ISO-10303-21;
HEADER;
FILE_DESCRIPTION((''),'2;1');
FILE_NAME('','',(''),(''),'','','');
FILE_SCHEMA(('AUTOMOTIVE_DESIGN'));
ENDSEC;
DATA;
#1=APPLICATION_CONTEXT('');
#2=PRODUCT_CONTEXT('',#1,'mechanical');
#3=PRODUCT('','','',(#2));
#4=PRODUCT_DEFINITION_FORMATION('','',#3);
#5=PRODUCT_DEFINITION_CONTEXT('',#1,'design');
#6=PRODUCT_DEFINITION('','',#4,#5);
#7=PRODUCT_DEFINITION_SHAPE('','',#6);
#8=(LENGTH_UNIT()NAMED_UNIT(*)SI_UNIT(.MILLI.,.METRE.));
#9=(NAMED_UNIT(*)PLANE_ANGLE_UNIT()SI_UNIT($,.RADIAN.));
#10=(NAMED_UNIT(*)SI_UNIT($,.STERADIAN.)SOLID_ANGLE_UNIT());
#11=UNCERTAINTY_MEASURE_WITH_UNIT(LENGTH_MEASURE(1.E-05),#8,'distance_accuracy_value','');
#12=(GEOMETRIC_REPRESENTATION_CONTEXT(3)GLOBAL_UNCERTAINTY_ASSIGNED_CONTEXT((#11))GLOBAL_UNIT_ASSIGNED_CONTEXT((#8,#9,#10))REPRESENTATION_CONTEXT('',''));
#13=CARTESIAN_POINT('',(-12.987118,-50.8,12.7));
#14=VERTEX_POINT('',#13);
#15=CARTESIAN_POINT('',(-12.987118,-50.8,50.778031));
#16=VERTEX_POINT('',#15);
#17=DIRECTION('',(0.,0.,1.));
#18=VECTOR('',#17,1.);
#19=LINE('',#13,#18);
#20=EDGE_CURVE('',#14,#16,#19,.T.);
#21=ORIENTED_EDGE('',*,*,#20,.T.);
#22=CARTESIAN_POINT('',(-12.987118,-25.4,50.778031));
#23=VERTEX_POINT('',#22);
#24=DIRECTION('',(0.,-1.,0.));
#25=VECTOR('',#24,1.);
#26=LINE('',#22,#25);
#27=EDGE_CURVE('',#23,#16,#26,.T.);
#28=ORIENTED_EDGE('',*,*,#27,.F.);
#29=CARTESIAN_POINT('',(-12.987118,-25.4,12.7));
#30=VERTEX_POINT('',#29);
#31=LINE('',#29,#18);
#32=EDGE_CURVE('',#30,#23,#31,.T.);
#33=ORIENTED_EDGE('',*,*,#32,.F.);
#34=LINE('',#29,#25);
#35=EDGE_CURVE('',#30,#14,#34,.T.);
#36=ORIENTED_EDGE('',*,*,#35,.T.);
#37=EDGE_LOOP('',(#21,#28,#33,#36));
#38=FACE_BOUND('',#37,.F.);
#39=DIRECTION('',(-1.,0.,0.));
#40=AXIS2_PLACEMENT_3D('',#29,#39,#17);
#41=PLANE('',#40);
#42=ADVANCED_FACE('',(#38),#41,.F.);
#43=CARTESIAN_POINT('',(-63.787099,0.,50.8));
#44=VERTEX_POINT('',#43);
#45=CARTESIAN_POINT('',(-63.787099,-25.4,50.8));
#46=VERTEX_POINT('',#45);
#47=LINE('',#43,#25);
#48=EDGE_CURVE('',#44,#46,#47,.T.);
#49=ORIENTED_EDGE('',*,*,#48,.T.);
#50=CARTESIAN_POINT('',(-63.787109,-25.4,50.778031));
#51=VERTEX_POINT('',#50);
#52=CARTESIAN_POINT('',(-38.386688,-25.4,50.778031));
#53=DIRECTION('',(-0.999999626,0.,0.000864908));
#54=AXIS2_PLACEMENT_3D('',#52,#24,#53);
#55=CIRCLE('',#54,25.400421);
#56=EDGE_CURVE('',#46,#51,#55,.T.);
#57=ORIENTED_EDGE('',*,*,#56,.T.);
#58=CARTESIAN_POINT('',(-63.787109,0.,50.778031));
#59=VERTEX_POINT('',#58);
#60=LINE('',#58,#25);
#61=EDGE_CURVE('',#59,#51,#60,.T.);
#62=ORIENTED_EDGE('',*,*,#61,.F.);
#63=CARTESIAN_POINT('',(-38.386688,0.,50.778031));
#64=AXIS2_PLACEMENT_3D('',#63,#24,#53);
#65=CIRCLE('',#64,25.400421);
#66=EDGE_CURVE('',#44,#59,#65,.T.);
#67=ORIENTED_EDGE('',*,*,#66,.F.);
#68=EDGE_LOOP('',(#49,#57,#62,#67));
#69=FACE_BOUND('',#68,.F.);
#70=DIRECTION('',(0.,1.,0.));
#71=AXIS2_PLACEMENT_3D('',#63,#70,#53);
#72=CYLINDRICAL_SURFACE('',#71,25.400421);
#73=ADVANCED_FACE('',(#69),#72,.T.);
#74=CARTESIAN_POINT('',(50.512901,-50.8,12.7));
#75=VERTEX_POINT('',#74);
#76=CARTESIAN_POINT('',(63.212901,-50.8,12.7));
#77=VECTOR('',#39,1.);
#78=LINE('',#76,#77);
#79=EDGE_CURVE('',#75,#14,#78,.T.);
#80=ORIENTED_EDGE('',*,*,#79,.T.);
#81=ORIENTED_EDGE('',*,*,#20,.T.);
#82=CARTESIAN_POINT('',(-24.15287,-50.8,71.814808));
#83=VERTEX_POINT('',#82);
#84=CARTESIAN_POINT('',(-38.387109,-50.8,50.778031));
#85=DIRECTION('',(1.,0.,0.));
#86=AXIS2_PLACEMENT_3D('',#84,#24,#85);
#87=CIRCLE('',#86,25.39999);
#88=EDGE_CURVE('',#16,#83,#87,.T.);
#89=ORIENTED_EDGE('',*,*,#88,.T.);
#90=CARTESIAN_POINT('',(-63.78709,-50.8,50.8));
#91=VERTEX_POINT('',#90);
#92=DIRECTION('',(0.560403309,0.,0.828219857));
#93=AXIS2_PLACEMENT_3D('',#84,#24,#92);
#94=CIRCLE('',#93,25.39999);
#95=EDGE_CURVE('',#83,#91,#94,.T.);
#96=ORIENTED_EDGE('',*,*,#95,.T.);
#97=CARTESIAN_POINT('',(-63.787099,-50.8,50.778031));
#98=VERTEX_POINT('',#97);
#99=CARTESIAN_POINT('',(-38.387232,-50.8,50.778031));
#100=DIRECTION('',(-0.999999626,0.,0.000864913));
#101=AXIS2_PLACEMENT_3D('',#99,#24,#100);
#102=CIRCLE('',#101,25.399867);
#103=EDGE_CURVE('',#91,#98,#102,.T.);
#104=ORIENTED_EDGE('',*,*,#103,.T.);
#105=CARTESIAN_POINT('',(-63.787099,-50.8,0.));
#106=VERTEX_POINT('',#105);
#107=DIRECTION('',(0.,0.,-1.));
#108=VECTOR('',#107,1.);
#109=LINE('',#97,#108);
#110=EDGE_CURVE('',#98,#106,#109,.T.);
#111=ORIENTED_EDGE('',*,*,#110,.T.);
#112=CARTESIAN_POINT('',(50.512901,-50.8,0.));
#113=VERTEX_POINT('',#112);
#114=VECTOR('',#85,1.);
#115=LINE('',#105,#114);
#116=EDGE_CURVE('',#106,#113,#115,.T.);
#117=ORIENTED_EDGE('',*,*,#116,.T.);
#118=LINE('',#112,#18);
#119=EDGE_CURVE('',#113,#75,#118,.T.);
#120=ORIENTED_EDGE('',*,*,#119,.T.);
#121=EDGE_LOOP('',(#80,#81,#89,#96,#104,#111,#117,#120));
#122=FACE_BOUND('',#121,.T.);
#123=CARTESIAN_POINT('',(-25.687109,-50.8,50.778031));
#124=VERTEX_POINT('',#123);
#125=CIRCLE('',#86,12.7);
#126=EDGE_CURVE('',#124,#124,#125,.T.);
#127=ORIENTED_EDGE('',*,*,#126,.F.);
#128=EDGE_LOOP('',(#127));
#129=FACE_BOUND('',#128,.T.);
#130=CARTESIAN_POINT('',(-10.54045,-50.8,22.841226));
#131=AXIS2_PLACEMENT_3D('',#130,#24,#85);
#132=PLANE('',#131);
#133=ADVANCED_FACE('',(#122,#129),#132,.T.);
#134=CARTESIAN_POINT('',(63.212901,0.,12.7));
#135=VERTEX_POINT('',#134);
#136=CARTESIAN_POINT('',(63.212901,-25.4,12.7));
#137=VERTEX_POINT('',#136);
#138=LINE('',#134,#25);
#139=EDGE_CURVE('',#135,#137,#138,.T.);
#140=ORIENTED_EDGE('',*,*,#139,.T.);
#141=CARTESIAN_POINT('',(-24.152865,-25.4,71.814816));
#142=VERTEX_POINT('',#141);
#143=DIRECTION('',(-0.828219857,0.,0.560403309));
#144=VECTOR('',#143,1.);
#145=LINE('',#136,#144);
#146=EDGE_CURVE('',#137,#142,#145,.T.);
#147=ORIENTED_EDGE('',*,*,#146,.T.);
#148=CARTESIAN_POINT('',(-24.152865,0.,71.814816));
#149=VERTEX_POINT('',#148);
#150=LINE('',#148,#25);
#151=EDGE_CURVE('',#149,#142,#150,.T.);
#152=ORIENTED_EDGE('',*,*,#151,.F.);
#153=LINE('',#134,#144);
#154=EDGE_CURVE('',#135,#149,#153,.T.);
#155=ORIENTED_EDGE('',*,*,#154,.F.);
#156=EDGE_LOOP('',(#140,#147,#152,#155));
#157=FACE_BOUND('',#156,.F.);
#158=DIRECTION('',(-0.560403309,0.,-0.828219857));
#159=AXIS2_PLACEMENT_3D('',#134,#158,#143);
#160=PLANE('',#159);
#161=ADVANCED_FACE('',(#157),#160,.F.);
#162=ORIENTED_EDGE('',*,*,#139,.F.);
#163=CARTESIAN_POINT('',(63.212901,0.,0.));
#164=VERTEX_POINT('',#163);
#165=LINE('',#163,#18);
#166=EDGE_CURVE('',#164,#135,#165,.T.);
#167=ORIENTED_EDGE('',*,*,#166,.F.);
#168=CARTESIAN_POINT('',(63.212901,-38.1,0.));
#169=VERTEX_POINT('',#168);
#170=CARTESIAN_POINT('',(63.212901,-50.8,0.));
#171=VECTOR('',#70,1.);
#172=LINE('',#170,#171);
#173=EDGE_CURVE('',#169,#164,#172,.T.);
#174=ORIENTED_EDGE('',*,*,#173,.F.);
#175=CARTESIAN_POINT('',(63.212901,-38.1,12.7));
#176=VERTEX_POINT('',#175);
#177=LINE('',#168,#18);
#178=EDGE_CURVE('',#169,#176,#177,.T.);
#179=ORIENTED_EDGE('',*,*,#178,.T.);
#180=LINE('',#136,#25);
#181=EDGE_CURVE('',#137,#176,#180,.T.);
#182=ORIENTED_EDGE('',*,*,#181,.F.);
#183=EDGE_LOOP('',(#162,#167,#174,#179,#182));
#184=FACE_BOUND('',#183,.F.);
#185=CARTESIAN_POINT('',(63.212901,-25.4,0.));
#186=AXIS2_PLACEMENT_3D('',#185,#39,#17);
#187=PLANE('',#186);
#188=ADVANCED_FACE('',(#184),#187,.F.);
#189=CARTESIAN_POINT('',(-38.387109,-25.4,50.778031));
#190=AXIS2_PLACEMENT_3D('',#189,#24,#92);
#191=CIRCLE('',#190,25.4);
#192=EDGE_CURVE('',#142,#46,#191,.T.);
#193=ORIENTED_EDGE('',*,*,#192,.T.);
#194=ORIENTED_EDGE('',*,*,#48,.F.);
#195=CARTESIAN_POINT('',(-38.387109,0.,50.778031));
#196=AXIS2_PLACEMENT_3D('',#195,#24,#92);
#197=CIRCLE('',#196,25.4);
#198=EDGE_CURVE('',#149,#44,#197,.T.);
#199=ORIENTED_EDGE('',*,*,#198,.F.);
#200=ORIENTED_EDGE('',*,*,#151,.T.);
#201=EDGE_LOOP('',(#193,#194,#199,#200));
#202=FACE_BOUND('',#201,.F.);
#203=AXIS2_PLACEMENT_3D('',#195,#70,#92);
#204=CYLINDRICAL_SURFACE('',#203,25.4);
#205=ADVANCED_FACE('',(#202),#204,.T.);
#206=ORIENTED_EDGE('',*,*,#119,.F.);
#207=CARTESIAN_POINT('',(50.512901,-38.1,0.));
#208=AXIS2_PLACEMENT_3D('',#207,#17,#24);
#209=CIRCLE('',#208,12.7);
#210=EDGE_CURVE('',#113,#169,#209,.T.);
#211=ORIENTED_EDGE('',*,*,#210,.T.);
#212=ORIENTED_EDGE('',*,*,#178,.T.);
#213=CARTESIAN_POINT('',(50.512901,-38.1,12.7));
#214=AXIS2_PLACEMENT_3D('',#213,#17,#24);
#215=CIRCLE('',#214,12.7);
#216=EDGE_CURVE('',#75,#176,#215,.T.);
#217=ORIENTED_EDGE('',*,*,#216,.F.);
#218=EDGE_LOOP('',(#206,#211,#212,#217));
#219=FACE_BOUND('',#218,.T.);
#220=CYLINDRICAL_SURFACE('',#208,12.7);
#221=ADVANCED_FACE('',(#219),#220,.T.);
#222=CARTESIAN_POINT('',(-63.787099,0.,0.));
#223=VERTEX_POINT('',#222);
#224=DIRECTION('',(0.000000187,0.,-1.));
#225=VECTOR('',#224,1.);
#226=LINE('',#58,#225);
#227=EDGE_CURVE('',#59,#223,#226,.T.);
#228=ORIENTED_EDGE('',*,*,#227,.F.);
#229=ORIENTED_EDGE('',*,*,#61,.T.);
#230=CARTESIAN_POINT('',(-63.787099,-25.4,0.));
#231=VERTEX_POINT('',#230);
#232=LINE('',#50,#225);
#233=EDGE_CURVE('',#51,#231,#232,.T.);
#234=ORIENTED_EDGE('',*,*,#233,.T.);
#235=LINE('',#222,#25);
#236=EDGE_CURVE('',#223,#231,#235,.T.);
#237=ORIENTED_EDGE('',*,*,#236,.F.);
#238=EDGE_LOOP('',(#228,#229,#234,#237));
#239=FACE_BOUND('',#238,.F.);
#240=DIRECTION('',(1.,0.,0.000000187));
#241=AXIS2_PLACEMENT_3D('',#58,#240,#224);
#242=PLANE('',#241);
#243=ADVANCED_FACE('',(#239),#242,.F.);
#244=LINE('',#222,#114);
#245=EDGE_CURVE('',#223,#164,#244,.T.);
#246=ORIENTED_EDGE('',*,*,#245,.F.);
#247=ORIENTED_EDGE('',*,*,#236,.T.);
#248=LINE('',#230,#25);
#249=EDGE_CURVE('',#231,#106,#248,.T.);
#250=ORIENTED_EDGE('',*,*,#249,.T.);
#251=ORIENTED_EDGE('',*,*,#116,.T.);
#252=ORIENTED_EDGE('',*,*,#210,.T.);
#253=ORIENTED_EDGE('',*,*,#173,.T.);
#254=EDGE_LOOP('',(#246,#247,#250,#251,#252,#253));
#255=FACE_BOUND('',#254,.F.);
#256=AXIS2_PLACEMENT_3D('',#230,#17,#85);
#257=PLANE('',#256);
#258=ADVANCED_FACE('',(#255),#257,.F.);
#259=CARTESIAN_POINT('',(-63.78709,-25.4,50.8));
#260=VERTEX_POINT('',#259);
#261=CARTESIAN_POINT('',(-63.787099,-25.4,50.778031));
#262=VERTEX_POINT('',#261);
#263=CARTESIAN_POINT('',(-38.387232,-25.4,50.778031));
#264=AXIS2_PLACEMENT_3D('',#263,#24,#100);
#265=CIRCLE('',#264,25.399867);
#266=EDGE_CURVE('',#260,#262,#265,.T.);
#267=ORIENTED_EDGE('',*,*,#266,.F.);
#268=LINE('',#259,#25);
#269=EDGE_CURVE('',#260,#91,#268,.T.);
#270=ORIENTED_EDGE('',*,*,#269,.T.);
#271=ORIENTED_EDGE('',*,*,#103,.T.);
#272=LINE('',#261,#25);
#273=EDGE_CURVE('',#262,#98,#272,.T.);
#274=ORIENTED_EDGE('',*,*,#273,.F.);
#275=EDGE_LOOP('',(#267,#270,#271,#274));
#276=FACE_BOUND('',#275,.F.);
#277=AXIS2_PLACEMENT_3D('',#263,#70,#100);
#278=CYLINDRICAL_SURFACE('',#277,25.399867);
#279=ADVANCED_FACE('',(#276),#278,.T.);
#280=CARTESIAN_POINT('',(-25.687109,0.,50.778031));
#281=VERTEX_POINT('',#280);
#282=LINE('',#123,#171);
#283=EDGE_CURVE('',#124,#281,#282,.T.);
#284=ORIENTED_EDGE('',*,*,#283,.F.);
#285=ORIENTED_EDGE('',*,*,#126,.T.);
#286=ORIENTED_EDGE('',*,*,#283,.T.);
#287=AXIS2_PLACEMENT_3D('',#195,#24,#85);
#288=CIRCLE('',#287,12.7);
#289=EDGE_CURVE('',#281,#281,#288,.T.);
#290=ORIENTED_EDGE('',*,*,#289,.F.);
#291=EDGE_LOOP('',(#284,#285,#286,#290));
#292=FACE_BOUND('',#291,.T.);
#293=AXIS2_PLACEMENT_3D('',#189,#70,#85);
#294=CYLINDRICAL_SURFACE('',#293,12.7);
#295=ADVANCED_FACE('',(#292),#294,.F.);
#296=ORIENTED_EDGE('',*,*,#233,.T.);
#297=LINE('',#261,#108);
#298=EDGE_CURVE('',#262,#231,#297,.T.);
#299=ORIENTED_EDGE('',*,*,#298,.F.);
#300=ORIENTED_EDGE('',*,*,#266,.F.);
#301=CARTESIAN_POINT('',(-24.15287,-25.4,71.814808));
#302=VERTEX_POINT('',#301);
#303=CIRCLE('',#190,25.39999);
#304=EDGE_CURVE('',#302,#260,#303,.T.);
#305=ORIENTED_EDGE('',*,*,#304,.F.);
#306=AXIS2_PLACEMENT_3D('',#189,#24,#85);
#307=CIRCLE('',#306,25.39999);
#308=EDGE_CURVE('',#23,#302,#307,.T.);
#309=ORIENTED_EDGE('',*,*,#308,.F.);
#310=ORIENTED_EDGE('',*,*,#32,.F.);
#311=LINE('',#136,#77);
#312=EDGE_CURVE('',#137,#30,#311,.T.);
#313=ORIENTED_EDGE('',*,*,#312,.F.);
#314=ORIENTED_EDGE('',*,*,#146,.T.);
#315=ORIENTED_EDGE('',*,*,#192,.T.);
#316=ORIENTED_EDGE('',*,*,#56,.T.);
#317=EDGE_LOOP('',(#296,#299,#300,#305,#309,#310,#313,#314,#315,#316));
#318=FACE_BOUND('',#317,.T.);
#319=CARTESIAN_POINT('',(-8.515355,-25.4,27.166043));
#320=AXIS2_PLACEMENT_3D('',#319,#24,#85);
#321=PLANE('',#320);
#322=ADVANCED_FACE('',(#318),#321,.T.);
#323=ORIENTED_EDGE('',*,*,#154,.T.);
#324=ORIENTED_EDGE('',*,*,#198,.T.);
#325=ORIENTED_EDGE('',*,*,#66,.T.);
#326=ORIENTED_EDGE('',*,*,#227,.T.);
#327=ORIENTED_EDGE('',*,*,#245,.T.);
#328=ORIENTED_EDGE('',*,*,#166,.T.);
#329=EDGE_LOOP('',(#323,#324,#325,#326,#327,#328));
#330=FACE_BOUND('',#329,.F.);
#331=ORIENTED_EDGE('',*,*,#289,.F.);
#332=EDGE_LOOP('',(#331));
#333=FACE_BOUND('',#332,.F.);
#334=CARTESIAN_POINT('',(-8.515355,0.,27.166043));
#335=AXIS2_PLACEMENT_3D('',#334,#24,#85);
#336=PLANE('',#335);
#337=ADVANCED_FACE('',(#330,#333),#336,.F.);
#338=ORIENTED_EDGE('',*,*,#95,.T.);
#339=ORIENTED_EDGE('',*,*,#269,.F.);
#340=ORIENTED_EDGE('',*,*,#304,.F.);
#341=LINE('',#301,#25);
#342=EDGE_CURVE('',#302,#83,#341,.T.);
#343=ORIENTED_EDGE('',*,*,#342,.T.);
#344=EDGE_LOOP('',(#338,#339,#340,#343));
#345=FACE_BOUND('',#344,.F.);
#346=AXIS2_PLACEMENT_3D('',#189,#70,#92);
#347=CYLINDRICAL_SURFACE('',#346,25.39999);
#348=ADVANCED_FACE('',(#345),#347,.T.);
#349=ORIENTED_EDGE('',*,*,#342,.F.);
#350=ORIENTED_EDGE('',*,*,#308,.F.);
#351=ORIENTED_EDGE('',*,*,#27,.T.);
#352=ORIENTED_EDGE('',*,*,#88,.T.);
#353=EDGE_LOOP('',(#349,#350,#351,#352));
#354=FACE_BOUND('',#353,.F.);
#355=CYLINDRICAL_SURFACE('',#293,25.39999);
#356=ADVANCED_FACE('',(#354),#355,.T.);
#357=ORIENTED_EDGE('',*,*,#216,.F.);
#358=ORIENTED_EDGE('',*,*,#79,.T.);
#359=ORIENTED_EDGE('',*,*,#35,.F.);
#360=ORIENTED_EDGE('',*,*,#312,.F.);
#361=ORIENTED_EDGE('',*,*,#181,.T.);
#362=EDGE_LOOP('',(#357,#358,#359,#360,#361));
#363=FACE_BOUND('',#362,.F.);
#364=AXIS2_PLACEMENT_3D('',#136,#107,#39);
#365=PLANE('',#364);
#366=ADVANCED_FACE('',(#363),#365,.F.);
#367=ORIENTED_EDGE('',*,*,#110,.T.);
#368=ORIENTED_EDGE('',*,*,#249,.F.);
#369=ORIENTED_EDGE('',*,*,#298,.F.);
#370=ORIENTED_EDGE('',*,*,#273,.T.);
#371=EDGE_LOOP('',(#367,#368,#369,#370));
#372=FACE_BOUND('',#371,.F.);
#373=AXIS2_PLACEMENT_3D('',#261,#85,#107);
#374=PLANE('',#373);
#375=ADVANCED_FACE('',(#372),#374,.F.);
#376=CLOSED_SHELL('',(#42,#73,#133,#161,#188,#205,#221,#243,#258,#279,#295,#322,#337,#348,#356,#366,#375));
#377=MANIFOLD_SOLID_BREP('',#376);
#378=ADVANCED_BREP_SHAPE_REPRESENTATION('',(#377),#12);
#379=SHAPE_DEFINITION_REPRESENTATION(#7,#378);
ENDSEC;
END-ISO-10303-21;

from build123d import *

# Parameters (mm, degrees)
F0_R     = 12.7
F1_DEPTH = 25.4
F2_R     = 12.7
F3_DEPTH = 25.4
F4_R     = 12.7


# Not quite as in the source:
# - ends of sketch curves that miss each other by under 0.0002 mm in the source are joined


with BuildPart() as f1:
    # F0 (on Front) → F1 (new body)
    with BuildSketch(Plane.XZ):
        with BuildLine():
            Line((63.2129007654, 12.7), (-24.1528646808, 71.8148155579))
            ThreePointArc((-24.1528646808, 71.8148155579), (-50.2855998854, 73.2187510696), (-63.7870992346, 50.8))
            ThreePointArc((-63.7870992346, 50.8), (-63.78710636, 50.7890156001), (-63.7871087352, 50.7780311981))
            Line((-63.7871087352, 50.7780311981), (-63.7870992346, 0))
            Line((-63.7870992346, 0), (63.2129007654, 0))
            Line((63.2129007654, 0), (63.2129007654, 12.7))
        make_face()
        with Locations((-38.3871087352, 50.7780311981)):
            Circle(F0_R, mode=Mode.SUBTRACT)
    extrude(amount=F1_DEPTH)

    # F2 (on face) → F3 (join)
    with BuildSketch(Plane.XZ.offset(25.4)):
        with BuildLine():
            Line((-12.9871182357, 12.7), (-12.9871182357, 50.7780311981))
            ThreePointArc((-12.9871182357, 50.7780311981), (-15.951544937, 62.6862214229), (-24.1528700049, 71.8148076894))
            ThreePointArc((-24.1528700049, 71.8148076894), (-50.2855954349, 73.2187426759), (-63.7870897341, 50.7999999918))
            ThreePointArc((-63.7870897341, 50.7999999918), (-63.7870968595, 50.789015596), (-63.7870992346, 50.7780311981))
            Line((-63.7870992346, 50.7780311981), (-63.7870992346, 12.7))
            Line((-63.7870992346, 12.7), (-63.7870992346, 0))
            Line((-63.7870992346, 0), (63.2129007654, 0))
            Line((63.2129007654, 0), (63.2129007654, 12.7))
            Line((63.2129007654, 12.7), (-12.9871182357, 12.7))
        make_face()
        with Locations((-38.3871087352, 50.7780311981)):
            Circle(F2_R, mode=Mode.SUBTRACT)
    extrude(amount=F3_DEPTH)

    # F4
    f4_edges = [f1.edges().sort_by_distance(p)[0] for p in [
        (63.212901, -50.8, 6.35),
    ]]
    fillet(f4_edges, radius=F4_R)


solid = f1.part
